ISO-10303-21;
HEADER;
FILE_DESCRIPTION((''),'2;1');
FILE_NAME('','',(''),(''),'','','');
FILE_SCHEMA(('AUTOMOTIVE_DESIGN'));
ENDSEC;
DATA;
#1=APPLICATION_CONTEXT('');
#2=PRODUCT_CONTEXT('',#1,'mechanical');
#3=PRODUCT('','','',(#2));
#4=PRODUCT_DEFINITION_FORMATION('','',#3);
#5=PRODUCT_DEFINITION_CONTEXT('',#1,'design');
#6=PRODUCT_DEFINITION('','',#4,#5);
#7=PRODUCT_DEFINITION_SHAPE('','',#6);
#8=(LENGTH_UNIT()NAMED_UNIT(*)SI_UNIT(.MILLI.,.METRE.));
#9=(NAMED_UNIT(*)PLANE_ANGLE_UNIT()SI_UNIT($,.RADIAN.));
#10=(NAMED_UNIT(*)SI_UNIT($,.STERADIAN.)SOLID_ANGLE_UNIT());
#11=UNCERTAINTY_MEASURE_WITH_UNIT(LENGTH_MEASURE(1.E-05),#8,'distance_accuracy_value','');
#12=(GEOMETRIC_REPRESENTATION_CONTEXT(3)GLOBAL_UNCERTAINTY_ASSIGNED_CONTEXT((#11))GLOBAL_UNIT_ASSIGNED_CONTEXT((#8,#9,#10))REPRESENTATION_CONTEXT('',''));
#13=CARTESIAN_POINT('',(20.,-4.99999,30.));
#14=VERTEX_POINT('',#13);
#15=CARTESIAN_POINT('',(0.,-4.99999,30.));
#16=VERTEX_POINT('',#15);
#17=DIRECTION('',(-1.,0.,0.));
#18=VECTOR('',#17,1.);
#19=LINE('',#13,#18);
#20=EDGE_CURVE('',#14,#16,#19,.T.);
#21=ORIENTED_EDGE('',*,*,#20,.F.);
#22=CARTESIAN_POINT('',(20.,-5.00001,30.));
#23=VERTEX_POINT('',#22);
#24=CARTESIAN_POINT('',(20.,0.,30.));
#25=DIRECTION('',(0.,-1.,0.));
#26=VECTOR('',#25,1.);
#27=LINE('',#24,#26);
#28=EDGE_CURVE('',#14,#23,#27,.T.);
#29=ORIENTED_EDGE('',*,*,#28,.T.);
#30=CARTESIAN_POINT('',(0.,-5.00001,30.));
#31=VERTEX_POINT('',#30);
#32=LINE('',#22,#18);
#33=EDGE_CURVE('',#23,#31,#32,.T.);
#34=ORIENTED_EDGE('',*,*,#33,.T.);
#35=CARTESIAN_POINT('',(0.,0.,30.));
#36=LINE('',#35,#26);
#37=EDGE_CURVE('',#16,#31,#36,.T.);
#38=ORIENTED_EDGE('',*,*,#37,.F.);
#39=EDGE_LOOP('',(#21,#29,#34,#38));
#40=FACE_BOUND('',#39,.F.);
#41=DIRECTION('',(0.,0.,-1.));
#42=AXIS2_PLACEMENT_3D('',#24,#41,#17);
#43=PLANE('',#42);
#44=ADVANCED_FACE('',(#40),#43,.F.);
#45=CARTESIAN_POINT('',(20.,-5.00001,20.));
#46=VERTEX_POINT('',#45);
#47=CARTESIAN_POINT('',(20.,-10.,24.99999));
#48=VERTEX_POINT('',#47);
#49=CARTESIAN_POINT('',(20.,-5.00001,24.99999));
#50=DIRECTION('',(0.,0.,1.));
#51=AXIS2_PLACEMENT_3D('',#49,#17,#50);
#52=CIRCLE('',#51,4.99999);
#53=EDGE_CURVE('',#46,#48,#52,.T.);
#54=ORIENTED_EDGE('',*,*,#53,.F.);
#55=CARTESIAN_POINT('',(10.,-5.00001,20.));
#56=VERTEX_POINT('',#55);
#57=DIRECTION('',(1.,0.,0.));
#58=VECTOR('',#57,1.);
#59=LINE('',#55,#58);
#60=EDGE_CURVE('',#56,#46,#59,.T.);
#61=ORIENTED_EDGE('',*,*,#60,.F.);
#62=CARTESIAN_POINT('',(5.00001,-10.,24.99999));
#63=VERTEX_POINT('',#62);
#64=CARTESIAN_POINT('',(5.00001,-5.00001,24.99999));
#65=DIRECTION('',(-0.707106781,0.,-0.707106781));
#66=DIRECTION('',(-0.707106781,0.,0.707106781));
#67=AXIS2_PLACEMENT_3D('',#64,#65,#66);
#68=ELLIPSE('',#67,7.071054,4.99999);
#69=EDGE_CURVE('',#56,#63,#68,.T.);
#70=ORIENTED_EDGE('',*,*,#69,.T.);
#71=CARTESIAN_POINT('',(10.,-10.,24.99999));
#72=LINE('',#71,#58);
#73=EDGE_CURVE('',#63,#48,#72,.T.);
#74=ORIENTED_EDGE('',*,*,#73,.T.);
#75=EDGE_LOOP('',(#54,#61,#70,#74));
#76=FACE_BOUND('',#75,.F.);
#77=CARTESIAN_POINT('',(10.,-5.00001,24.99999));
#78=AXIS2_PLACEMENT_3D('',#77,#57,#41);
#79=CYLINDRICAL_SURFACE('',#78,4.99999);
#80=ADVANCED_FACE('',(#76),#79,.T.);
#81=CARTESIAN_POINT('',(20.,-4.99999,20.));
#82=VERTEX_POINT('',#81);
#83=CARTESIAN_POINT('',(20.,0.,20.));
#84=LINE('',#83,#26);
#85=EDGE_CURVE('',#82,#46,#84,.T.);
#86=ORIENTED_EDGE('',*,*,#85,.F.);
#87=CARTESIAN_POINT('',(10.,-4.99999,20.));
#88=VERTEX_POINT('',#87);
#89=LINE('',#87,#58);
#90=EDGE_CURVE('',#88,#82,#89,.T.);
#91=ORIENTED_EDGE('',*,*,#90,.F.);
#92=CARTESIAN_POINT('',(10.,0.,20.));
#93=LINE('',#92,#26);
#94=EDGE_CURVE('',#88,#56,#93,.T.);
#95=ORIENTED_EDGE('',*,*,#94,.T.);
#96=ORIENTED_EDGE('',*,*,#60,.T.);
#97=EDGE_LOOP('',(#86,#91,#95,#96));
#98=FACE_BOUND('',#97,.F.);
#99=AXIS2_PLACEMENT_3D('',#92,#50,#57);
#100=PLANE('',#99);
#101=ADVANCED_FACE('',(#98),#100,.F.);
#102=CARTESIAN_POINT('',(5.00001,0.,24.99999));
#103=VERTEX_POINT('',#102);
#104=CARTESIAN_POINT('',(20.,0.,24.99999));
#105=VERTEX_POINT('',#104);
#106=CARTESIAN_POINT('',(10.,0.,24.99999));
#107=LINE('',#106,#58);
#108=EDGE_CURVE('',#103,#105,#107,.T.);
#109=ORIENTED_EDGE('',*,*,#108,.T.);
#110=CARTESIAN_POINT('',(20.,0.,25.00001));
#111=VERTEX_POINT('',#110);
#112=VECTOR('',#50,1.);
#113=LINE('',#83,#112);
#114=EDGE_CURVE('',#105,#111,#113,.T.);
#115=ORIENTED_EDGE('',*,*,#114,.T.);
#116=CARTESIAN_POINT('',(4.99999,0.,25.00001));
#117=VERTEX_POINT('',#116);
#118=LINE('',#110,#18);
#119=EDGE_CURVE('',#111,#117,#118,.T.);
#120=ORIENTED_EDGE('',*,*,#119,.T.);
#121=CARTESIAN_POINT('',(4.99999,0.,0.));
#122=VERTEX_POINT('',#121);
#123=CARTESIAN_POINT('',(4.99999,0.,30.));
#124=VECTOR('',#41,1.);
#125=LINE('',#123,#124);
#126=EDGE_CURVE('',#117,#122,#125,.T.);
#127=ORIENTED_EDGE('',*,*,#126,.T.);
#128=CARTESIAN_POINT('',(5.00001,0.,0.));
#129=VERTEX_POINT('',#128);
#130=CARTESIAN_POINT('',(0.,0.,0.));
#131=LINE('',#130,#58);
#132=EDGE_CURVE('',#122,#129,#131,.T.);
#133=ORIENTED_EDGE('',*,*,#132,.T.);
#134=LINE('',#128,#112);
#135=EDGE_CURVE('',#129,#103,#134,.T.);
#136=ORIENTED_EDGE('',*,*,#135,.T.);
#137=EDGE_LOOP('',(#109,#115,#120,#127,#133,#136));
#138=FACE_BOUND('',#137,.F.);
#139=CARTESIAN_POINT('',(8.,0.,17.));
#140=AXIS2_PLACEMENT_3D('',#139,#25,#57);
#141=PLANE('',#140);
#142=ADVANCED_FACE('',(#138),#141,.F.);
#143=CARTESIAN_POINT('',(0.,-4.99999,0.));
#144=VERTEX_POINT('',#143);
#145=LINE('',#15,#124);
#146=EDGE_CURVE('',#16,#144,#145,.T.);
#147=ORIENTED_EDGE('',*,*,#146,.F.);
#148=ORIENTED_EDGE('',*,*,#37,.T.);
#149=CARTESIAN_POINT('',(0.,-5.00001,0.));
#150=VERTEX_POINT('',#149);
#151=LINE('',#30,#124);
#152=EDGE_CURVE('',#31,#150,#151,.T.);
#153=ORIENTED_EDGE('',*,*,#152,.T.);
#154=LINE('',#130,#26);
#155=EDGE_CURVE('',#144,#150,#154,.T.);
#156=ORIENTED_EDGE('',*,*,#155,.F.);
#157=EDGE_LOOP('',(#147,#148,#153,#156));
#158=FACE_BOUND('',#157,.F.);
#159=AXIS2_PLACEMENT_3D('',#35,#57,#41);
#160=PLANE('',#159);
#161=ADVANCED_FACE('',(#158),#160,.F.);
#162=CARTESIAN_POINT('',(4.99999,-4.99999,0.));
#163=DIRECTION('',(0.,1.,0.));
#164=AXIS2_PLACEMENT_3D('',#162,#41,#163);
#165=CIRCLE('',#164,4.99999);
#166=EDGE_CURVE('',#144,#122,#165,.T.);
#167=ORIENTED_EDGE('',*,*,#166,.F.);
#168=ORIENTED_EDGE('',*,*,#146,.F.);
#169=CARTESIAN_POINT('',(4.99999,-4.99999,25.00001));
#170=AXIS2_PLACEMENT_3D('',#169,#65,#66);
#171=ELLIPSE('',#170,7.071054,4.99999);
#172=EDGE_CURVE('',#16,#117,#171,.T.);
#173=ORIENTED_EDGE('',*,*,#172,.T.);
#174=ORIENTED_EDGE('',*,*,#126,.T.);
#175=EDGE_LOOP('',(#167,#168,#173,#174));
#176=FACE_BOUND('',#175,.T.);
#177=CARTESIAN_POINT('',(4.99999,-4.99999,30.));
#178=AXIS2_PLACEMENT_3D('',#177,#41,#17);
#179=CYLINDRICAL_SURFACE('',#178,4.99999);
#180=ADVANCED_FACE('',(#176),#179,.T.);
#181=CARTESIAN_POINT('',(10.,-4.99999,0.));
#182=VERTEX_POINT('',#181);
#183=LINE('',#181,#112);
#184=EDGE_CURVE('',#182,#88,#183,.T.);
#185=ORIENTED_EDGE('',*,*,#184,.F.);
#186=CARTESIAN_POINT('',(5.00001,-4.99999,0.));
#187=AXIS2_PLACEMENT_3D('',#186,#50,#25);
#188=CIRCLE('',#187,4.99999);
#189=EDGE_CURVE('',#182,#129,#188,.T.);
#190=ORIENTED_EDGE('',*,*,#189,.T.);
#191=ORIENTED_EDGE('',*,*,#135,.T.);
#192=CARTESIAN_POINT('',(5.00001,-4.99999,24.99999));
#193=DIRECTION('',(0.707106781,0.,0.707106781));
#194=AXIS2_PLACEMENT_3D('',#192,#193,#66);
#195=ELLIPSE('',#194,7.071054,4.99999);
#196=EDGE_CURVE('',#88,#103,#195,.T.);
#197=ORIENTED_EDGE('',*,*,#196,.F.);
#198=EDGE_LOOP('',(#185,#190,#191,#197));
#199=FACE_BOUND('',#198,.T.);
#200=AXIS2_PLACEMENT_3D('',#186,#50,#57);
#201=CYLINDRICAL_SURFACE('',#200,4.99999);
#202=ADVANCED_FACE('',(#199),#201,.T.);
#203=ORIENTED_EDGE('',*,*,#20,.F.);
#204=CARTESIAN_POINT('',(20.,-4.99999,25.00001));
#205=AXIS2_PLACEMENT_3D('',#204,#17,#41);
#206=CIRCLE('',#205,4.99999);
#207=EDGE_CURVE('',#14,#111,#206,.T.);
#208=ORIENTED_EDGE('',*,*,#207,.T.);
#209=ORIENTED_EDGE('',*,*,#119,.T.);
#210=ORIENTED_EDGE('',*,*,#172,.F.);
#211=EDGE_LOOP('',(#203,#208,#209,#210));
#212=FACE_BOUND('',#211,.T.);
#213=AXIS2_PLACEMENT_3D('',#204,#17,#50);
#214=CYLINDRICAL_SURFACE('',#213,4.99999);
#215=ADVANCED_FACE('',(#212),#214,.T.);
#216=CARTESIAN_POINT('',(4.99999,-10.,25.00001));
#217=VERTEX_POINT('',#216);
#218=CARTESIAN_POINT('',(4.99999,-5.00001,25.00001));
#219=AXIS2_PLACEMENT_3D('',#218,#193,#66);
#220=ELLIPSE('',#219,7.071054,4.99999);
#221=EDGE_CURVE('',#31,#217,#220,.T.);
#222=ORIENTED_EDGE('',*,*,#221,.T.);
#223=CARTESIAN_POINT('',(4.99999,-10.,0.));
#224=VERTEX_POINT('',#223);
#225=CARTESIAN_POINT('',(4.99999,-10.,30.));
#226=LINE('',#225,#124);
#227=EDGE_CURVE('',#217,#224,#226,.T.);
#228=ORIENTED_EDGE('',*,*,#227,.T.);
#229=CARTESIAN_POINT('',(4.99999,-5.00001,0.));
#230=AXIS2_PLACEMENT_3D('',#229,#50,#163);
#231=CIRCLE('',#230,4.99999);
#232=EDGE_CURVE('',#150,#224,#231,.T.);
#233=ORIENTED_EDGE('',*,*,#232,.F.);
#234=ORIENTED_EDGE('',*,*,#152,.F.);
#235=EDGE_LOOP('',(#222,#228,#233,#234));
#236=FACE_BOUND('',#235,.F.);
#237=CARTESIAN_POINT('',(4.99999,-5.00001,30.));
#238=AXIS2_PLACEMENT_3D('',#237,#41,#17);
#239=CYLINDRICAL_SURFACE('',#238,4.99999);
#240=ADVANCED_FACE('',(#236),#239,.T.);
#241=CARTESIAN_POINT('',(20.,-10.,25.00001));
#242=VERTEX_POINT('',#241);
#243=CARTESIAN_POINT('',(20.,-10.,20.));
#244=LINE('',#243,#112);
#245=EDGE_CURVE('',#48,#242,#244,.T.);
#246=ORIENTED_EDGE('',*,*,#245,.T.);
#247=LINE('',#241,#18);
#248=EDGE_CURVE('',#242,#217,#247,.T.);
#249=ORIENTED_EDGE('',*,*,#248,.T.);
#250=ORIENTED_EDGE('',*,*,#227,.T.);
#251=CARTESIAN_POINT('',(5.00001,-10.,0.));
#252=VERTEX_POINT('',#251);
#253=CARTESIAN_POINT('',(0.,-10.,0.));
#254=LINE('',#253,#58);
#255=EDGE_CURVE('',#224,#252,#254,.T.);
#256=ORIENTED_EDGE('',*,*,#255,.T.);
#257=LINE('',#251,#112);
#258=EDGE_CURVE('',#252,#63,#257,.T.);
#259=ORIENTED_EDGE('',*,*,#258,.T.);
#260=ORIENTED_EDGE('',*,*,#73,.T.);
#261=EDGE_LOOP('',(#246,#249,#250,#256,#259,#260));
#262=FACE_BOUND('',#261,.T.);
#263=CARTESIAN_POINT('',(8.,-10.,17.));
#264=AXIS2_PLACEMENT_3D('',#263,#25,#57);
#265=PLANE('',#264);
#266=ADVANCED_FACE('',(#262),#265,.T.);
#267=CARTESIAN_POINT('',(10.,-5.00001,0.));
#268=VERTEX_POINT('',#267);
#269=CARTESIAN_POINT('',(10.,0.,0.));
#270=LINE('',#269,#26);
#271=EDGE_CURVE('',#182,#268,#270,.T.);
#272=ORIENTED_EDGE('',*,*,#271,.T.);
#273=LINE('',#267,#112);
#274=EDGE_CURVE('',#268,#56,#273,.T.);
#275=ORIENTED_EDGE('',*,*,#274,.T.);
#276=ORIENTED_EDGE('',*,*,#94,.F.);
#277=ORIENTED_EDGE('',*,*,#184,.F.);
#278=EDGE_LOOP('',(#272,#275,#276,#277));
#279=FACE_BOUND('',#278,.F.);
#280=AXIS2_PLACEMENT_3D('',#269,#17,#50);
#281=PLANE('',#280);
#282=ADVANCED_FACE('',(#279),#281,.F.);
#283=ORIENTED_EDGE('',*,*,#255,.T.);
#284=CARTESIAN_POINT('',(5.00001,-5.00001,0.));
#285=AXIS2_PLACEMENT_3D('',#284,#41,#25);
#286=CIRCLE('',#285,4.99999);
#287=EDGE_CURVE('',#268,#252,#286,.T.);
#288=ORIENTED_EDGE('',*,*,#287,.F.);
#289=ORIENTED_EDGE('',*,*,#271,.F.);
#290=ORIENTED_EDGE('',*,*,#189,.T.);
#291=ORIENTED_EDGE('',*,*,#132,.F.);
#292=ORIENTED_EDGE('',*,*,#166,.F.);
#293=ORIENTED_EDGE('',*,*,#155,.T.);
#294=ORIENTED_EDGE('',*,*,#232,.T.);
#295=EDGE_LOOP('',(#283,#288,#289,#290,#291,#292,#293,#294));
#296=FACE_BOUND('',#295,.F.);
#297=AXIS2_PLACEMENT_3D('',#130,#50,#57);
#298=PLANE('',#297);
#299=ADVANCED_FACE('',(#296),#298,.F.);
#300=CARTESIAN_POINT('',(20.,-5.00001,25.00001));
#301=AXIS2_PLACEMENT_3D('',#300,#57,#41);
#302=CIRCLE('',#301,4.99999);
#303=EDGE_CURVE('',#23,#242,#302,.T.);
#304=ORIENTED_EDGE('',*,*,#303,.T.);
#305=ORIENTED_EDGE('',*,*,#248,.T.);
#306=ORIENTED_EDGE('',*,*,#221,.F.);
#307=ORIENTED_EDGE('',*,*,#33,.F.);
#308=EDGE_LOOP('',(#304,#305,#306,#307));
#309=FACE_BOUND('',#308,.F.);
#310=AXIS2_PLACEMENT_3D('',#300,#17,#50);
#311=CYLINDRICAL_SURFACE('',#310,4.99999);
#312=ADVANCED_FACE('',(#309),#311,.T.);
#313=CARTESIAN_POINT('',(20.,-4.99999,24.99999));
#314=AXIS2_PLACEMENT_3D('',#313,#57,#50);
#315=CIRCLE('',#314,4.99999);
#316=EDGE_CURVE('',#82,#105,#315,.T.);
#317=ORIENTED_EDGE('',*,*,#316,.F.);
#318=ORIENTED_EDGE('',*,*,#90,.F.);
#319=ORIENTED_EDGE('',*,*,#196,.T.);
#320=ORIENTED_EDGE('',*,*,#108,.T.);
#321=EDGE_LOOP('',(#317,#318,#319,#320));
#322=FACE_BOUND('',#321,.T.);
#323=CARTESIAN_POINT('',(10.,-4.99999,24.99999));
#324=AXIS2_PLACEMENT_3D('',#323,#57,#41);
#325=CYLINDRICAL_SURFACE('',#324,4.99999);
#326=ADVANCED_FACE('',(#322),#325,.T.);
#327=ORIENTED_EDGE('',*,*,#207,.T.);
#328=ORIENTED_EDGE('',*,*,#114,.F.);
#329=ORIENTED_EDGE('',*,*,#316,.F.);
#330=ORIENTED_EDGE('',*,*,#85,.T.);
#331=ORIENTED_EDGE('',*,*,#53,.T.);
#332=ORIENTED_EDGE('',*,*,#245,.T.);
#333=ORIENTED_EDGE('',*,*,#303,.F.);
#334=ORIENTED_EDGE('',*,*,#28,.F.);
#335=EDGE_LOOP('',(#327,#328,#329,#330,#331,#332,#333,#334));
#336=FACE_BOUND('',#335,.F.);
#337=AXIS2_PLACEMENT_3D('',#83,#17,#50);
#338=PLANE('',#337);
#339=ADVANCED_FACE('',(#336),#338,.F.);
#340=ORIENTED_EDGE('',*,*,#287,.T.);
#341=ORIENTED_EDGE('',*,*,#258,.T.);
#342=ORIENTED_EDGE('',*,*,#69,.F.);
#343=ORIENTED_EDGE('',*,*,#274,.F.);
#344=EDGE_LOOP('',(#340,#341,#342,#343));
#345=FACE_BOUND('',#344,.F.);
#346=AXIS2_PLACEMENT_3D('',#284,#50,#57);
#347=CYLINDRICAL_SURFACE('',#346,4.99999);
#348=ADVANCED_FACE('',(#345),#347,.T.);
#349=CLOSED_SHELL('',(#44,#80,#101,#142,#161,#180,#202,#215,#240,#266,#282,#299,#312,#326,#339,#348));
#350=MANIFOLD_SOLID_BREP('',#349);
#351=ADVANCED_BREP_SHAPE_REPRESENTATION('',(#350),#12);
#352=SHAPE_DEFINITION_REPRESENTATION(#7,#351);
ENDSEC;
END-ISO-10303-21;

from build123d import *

# Parameters (mm, degrees)
F1_DEPTH = 10
F2_R     = 4.99999


# Not quite as in the source:
# - a fillet or chamfer is up to 0.001 mm smaller than in the source, because OpenCascade refuses the exact size


with BuildPart() as f1:
    # F0 (on Front) → F1 (new body)
    with BuildSketch(Plane.XZ):
        Polygon((0, 30), (0, 0), (10, 0), (10, 20), (20, 20), (20, 30), align=None)
    extrude(amount=F1_DEPTH)

    # F2 (radius 5 in the source; OpenCascade refuses exactly that, so slightly less here)
    f2_edges = [f1.edges().sort_by_distance(p)[0] for p in [
        (10, -10, 30),
        (10, 0, 30),
        (0, -10, 15),
        (10, -10, 10),
        (15, -10, 20),
        (10, 0, 10),
        (15, 0, 20),
        (0, 0, 15),
    ]]
    fillet(f2_edges, radius=F2_R)


solid = f1.part
